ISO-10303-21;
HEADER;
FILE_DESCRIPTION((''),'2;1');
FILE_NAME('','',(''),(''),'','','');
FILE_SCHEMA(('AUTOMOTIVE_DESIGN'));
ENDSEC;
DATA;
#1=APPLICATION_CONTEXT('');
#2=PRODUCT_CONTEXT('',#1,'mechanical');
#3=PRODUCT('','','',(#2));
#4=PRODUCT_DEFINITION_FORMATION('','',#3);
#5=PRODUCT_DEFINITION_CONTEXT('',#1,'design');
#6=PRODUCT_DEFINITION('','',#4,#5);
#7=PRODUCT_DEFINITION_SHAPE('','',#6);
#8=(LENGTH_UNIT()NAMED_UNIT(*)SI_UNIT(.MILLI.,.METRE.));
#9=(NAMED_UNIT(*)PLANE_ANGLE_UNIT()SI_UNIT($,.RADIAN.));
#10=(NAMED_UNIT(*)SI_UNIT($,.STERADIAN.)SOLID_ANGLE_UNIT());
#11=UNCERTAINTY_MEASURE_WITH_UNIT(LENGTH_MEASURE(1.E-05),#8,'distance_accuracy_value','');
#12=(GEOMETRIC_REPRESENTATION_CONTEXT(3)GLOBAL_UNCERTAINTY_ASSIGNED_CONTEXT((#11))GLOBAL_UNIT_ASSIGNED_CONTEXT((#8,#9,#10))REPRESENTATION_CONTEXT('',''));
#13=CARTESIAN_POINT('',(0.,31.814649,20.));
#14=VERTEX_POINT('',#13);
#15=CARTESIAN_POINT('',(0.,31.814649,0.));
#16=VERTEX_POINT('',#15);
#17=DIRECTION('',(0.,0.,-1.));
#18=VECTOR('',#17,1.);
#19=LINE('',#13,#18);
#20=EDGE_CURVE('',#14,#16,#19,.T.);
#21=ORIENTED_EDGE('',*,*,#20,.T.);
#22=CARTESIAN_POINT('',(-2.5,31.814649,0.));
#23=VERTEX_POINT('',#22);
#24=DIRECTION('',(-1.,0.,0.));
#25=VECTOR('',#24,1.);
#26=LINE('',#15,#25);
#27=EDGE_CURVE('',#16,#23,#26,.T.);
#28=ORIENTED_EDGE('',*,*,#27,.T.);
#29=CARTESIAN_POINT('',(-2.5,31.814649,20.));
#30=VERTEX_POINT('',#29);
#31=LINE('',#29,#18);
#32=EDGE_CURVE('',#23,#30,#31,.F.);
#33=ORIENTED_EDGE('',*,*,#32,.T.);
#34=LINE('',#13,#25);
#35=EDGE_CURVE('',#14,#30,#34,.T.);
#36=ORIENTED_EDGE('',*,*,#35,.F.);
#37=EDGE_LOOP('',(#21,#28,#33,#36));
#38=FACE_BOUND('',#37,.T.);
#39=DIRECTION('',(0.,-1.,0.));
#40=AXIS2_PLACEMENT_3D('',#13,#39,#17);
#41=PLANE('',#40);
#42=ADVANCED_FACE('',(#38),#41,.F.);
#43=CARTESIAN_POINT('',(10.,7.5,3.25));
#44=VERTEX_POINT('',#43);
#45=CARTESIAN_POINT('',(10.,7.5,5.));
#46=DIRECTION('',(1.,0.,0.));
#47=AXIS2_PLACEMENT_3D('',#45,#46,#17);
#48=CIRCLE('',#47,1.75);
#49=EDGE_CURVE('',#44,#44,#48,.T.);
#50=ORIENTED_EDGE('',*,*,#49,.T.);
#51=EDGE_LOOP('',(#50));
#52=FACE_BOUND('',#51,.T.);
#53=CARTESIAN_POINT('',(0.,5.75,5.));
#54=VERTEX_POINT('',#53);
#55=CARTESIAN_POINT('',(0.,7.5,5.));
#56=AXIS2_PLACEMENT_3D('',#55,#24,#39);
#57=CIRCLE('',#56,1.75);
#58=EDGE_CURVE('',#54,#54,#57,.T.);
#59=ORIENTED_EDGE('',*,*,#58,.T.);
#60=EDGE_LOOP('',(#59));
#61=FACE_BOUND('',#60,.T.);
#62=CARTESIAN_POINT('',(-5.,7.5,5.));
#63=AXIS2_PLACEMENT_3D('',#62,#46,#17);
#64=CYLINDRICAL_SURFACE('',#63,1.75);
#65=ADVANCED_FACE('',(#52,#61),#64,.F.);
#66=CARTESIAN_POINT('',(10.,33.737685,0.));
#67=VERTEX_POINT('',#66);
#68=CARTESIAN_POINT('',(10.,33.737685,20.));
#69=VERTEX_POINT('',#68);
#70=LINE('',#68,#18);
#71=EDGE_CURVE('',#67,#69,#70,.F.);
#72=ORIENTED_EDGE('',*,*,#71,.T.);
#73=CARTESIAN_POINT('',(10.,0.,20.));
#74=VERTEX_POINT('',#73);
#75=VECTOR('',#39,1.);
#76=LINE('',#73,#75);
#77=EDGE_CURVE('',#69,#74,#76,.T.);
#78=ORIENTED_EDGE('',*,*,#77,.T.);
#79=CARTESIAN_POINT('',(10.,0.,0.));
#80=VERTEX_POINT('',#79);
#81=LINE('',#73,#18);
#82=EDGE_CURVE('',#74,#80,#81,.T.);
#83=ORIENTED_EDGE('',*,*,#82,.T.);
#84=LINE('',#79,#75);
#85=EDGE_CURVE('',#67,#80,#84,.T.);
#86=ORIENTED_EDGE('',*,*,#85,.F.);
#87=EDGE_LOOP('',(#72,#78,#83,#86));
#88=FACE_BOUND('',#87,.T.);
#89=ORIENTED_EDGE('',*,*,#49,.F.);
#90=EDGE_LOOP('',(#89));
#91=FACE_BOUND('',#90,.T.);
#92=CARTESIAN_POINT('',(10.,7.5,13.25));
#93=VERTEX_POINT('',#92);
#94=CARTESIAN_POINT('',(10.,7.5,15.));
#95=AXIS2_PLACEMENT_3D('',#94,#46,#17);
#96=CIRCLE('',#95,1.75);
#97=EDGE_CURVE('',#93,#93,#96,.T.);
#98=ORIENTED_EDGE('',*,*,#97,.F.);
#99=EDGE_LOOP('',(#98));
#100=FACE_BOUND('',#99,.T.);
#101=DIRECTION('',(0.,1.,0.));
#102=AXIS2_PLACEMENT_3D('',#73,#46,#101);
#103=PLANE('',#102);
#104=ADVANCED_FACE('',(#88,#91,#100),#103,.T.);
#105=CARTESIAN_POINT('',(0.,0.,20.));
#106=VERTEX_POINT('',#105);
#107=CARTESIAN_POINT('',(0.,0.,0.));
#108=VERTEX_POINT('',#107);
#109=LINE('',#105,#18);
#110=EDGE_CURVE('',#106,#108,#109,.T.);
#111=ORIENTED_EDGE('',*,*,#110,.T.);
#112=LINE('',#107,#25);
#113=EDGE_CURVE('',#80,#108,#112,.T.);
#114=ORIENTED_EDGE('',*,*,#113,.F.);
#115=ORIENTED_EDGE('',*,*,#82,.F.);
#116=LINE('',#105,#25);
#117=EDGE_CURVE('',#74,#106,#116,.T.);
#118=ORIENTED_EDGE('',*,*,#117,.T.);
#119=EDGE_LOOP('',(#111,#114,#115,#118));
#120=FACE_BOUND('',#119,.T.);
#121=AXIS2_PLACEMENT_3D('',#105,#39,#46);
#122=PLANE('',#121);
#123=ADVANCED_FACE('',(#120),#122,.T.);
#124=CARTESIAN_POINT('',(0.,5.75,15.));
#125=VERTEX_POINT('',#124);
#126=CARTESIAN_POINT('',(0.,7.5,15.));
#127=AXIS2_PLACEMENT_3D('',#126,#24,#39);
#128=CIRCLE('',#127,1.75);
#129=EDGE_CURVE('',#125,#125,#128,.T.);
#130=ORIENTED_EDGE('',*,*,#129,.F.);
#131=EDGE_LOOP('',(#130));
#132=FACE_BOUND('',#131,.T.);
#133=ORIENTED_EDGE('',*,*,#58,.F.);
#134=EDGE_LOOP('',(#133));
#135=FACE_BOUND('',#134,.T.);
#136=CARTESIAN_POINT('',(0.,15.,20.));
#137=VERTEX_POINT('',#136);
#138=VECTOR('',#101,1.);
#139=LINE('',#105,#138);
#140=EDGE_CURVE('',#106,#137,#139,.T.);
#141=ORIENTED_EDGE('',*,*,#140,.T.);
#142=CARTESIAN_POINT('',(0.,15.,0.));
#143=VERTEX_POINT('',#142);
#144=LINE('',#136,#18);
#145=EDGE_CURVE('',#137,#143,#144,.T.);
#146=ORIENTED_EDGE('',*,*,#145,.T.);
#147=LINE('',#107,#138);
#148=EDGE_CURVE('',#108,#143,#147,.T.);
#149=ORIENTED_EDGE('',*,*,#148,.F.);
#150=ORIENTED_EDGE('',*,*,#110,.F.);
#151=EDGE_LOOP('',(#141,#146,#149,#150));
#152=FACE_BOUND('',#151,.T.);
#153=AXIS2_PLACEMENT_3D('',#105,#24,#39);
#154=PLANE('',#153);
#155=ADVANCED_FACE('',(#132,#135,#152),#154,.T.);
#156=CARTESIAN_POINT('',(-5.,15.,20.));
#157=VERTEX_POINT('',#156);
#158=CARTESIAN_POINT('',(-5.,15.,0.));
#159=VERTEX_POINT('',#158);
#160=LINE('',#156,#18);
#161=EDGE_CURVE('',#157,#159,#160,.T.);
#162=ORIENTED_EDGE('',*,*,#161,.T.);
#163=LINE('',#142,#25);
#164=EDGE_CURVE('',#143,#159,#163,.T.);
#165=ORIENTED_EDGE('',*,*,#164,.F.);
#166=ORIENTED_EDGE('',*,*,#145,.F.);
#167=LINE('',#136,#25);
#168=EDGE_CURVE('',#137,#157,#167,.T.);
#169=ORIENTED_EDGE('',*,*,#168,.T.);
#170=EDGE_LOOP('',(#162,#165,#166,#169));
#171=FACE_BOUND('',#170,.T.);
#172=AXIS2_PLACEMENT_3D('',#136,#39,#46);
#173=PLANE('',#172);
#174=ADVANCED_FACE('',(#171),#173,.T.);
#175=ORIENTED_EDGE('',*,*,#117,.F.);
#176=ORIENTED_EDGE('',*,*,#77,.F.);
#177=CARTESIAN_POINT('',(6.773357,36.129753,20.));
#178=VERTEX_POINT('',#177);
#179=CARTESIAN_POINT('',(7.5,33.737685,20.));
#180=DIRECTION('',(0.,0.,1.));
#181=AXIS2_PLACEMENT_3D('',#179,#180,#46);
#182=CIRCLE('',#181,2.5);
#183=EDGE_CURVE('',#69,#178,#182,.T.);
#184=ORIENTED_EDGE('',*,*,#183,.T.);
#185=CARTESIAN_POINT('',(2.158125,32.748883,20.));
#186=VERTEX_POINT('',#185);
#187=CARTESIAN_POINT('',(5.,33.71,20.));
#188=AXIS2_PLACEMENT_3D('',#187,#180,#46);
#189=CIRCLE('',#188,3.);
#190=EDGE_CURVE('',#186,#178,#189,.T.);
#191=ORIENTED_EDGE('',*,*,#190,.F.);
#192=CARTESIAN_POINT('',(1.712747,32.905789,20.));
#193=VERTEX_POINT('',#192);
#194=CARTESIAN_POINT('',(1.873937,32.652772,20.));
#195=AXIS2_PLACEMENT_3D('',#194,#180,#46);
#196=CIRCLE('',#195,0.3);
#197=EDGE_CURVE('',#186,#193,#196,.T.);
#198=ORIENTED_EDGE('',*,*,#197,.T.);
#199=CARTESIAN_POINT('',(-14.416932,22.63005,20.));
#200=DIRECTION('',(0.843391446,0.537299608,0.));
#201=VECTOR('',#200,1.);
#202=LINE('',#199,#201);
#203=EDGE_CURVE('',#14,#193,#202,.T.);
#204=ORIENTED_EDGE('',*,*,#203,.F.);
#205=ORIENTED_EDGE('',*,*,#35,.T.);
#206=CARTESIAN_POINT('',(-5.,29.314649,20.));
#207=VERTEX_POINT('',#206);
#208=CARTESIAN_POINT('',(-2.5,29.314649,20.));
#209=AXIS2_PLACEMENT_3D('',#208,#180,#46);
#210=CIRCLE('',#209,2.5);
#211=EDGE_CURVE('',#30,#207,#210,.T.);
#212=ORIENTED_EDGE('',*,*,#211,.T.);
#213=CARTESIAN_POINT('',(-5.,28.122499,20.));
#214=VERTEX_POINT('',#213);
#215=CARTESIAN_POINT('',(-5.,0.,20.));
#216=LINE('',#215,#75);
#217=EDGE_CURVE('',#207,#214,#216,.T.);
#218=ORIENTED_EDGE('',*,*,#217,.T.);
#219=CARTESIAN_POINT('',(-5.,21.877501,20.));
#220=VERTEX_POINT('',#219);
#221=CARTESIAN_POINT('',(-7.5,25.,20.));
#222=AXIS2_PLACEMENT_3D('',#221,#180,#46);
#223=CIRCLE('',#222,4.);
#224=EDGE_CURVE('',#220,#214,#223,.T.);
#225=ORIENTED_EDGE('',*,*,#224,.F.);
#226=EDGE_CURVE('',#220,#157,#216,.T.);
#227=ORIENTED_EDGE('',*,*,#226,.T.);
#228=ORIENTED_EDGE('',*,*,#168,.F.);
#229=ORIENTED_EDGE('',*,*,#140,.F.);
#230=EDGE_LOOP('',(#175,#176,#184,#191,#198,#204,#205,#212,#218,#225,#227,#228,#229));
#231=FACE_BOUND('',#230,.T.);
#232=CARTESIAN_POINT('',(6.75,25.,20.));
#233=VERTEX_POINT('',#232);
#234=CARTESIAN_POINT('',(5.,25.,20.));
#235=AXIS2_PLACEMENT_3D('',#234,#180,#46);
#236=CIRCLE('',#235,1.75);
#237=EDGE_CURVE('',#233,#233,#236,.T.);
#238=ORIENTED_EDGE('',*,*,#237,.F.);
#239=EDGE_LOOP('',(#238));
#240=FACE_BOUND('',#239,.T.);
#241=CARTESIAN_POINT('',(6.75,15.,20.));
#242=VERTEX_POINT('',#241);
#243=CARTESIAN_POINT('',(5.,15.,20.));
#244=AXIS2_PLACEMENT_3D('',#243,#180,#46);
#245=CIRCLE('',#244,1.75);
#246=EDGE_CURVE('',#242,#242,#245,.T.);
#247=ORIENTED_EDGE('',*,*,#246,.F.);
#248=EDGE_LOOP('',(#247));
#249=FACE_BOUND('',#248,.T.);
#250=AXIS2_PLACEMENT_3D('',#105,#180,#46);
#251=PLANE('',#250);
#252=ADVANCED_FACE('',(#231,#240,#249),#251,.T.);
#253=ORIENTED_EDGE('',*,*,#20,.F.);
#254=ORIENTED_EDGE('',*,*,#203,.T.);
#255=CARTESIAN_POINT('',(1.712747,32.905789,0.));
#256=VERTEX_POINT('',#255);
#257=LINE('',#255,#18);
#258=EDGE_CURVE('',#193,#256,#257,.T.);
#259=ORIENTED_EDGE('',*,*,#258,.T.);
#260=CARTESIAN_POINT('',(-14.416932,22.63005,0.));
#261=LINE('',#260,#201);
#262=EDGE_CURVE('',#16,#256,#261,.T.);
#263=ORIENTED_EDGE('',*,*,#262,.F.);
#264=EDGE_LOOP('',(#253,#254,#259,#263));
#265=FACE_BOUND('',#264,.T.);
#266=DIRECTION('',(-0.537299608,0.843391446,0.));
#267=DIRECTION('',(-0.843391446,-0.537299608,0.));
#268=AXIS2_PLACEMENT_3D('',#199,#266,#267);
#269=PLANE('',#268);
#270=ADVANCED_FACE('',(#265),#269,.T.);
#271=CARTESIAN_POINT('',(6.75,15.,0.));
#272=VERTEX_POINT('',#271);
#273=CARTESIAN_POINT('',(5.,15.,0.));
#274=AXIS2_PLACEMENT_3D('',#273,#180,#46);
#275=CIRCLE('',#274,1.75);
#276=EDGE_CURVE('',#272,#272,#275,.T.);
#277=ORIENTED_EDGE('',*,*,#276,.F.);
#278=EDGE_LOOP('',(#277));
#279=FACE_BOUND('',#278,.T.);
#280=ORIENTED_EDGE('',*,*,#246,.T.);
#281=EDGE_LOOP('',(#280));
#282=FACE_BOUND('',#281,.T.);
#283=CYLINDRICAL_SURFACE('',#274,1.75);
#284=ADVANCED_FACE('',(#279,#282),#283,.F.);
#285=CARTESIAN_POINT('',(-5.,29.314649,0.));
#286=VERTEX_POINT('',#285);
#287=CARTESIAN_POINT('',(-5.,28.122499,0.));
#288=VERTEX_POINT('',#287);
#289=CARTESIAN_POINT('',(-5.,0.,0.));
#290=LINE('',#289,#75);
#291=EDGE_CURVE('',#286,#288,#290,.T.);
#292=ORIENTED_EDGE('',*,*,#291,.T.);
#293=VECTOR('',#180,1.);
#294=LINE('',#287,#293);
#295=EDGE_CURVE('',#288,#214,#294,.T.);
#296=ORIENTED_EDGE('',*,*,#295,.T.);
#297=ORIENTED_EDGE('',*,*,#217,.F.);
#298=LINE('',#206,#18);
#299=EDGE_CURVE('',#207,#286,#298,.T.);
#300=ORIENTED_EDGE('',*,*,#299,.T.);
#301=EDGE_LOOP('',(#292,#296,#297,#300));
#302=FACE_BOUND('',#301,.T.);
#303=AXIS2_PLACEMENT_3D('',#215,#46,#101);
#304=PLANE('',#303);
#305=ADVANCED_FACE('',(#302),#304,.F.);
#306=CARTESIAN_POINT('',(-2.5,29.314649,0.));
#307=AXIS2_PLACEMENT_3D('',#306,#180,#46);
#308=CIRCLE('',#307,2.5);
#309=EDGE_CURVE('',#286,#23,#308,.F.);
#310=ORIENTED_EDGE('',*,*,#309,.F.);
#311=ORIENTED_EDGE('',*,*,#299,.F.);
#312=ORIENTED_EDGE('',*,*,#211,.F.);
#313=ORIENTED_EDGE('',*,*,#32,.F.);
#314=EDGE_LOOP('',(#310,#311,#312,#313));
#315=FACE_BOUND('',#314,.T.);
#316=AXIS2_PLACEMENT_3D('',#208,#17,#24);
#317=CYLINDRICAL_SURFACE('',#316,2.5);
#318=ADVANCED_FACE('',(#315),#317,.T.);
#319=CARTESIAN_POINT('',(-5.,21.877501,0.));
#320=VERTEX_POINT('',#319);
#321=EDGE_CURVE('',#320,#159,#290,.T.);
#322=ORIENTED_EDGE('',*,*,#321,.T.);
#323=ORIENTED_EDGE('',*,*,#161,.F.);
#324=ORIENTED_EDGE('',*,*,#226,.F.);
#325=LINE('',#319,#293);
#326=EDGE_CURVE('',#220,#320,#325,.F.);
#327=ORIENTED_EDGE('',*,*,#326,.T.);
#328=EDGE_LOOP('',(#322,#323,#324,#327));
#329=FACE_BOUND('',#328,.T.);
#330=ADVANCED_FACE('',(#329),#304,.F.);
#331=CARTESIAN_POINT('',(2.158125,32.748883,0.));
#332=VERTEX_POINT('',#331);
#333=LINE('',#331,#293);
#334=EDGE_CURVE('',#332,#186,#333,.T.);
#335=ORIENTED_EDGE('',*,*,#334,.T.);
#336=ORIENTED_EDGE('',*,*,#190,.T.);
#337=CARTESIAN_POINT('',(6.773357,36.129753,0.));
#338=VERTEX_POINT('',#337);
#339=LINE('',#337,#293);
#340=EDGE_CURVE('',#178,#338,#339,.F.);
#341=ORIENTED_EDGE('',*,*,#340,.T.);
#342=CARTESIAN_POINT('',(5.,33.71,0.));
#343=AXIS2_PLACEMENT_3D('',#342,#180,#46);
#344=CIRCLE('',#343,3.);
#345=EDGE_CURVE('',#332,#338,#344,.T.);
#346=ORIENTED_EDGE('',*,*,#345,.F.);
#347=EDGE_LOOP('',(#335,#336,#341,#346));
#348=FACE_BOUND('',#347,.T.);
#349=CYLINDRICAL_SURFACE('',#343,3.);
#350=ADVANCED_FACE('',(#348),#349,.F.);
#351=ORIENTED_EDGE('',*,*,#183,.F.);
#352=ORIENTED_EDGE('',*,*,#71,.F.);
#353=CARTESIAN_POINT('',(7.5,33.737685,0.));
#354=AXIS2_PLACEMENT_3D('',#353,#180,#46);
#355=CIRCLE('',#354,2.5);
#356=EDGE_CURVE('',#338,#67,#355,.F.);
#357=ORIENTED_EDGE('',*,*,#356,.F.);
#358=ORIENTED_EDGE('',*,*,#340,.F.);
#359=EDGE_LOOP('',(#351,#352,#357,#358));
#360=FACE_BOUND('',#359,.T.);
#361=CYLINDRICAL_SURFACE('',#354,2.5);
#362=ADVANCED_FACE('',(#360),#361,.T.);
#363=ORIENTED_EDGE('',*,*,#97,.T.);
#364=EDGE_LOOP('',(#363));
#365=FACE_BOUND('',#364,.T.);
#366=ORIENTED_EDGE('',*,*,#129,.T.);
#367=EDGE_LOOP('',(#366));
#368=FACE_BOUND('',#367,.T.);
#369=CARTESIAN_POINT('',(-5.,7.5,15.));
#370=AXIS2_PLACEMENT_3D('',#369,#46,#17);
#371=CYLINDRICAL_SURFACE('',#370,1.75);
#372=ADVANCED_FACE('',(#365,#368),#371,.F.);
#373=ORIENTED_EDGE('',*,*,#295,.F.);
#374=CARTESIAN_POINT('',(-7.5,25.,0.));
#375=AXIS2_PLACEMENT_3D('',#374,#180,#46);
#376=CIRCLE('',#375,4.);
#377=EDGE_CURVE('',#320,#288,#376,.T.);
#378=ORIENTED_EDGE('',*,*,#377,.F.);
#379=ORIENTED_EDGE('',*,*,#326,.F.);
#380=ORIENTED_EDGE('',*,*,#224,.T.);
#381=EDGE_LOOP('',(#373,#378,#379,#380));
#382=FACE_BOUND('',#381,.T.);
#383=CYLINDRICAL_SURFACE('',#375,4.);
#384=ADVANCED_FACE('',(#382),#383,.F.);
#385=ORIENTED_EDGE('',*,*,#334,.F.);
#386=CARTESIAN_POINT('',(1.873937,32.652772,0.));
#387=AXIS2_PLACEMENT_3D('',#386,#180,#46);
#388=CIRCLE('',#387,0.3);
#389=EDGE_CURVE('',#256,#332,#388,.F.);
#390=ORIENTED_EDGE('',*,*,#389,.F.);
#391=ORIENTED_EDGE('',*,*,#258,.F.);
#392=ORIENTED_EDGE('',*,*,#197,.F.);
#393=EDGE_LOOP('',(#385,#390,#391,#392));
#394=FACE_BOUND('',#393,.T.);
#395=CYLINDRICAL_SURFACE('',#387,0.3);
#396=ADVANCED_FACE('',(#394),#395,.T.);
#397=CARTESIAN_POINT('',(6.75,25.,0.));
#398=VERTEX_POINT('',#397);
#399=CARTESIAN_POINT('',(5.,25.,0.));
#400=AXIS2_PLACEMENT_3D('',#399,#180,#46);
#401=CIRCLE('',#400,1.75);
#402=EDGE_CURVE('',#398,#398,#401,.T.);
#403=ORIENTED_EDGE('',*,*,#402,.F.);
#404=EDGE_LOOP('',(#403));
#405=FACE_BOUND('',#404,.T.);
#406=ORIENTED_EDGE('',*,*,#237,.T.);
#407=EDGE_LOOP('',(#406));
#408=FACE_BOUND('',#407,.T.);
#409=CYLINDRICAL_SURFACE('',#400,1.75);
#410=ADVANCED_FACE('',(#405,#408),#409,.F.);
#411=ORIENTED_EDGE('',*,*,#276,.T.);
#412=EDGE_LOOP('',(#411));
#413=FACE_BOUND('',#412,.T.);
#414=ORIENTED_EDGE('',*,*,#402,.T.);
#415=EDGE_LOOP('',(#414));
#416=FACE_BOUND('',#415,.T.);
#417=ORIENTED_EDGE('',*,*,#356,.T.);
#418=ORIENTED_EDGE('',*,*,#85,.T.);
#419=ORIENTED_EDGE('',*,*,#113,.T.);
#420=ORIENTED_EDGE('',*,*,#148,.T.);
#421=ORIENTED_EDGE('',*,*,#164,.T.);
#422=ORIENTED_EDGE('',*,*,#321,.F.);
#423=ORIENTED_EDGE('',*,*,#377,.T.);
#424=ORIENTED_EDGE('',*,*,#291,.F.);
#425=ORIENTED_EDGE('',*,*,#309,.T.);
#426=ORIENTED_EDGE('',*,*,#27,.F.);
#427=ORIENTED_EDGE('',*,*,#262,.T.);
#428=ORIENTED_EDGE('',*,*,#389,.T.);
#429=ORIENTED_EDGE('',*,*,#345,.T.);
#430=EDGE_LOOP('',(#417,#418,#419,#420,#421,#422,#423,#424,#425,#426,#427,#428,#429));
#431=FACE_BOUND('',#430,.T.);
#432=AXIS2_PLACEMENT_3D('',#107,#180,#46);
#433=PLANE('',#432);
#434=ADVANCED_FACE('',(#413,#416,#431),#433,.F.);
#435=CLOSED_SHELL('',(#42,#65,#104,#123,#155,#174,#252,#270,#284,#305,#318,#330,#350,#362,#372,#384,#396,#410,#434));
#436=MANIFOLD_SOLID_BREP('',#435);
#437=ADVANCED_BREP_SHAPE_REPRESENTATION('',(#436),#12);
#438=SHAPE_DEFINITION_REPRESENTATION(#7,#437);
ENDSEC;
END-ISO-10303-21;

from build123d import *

# Parameters (mm, degrees)
BOSS_EXTRUDE1_DEPTH = 20
SKETCH3_R           = 1.75
CUT_EXTRUDE1_DEPTH  = 46.641220998
SKETCH4_R           = 3
SKETCH4_R_2         = 1.75
SKETCH4_R_3         = 4
CUT_EXTRUDE2_DEPTH  = 45.250661625
FILLET2_R           = 2.5
FILLET3_R           = 0.3


with BuildPart() as part:
    # Sketch2 → Boss-Extrude1 (new body)
    with BuildSketch(Plane.XY):
        Polygon((0, 0), (0, 15), (-5, 15), (-5, 31.814648696), (0, 31.814648696), (10, 38.185351304), (10, 0), align=None)
    extrude(amount=BOSS_EXTRUDE1_DEPTH)

    # Sketch3 → Cut-Extrude1 (cut, through all)
    with BuildSketch(Plane(origin=(10, 0, 0), x_dir=(0, 0, -1), z_dir=(1, 0, 0))):
        with Locations((-15, 7.5)):
            Circle(SKETCH3_R)
        with Locations((-5, 7.5)):
            Circle(SKETCH3_R)
    extrude(amount=-CUT_EXTRUDE1_DEPTH, mode=Mode.SUBTRACT)

    # Sketch4 → Cut-Extrude2 (cut, through all)
    with BuildSketch(Plane.XY.offset(20)):
        with Locations((5, 33.71)):
            Circle(SKETCH4_R)
        with Locations((5, 25)):
            Circle(SKETCH4_R_2)
        with Locations((-7.5, 25)):
            Circle(SKETCH4_R_3)
        with Locations((5, 15)):
            Circle(SKETCH4_R_2)
    extrude(amount=-CUT_EXTRUDE2_DEPTH, mode=Mode.SUBTRACT)

    # Fillet2
    # the kernel refuses this fillet: 2.5 mm, written as the material it takes off along each edge
    with BuildSketch(Plane(origin=(10, 38.185351304, -11.119166033), x_dir=(0, -1, 0), z_dir=(0, 0, 1))) as fillet2_piece_1:
        with BuildLine():
            CenterArc((4.447666413, -2.5), FILLET2_R, 90, 106.897304497)
            Line((2.055598265, -3.226642949), (2.007756902, -3.241175808))
            ThreePointArc((2.007756902, -3.241175808), (0.98562956, -1.640186455), (-0.042169572, -0.02686498))
            Line((-0.042169572, -0.02686498), (0, 0.05))
            Line((0, 0.05), (4.447666413, 0.05))
            Line((4.447666413, 0.05), (4.447666413, 0))
        make_face()
    extrude(amount=42.238332065, mode=Mode.SUBTRACT)
    with BuildSketch(Plane(origin=(-5, 31.814648696, -6.25), x_dir=(1, 0, 0), z_dir=(0, 0, 1))) as fillet2_piece_2:
        with BuildLine():
            CenterArc((FILLET2_R, -FILLET2_R), FILLET2_R, 90, 90)
            Line((0, -FILLET2_R), (-FILLET2_R * 0.02, -FILLET2_R))
            Line((-FILLET2_R * 0.02, -FILLET2_R), (-FILLET2_R * 0.02, FILLET2_R * 0.02))
            Line((-FILLET2_R * 0.02, FILLET2_R * 0.02), (FILLET2_R, FILLET2_R * 0.02))
            Line((FILLET2_R, FILLET2_R * 0.02), (FILLET2_R, 0))
        make_face()
    extrude(amount=32.5, mode=Mode.SUBTRACT)

    # Fillet3
    fillet3_edges = [part.edges().sort_by_distance(p)[0] for p in [
        (2.057505904, 33.125424519, 10),
    ]]
    fillet(fillet3_edges, radius=FILLET3_R)


solid = part.part
